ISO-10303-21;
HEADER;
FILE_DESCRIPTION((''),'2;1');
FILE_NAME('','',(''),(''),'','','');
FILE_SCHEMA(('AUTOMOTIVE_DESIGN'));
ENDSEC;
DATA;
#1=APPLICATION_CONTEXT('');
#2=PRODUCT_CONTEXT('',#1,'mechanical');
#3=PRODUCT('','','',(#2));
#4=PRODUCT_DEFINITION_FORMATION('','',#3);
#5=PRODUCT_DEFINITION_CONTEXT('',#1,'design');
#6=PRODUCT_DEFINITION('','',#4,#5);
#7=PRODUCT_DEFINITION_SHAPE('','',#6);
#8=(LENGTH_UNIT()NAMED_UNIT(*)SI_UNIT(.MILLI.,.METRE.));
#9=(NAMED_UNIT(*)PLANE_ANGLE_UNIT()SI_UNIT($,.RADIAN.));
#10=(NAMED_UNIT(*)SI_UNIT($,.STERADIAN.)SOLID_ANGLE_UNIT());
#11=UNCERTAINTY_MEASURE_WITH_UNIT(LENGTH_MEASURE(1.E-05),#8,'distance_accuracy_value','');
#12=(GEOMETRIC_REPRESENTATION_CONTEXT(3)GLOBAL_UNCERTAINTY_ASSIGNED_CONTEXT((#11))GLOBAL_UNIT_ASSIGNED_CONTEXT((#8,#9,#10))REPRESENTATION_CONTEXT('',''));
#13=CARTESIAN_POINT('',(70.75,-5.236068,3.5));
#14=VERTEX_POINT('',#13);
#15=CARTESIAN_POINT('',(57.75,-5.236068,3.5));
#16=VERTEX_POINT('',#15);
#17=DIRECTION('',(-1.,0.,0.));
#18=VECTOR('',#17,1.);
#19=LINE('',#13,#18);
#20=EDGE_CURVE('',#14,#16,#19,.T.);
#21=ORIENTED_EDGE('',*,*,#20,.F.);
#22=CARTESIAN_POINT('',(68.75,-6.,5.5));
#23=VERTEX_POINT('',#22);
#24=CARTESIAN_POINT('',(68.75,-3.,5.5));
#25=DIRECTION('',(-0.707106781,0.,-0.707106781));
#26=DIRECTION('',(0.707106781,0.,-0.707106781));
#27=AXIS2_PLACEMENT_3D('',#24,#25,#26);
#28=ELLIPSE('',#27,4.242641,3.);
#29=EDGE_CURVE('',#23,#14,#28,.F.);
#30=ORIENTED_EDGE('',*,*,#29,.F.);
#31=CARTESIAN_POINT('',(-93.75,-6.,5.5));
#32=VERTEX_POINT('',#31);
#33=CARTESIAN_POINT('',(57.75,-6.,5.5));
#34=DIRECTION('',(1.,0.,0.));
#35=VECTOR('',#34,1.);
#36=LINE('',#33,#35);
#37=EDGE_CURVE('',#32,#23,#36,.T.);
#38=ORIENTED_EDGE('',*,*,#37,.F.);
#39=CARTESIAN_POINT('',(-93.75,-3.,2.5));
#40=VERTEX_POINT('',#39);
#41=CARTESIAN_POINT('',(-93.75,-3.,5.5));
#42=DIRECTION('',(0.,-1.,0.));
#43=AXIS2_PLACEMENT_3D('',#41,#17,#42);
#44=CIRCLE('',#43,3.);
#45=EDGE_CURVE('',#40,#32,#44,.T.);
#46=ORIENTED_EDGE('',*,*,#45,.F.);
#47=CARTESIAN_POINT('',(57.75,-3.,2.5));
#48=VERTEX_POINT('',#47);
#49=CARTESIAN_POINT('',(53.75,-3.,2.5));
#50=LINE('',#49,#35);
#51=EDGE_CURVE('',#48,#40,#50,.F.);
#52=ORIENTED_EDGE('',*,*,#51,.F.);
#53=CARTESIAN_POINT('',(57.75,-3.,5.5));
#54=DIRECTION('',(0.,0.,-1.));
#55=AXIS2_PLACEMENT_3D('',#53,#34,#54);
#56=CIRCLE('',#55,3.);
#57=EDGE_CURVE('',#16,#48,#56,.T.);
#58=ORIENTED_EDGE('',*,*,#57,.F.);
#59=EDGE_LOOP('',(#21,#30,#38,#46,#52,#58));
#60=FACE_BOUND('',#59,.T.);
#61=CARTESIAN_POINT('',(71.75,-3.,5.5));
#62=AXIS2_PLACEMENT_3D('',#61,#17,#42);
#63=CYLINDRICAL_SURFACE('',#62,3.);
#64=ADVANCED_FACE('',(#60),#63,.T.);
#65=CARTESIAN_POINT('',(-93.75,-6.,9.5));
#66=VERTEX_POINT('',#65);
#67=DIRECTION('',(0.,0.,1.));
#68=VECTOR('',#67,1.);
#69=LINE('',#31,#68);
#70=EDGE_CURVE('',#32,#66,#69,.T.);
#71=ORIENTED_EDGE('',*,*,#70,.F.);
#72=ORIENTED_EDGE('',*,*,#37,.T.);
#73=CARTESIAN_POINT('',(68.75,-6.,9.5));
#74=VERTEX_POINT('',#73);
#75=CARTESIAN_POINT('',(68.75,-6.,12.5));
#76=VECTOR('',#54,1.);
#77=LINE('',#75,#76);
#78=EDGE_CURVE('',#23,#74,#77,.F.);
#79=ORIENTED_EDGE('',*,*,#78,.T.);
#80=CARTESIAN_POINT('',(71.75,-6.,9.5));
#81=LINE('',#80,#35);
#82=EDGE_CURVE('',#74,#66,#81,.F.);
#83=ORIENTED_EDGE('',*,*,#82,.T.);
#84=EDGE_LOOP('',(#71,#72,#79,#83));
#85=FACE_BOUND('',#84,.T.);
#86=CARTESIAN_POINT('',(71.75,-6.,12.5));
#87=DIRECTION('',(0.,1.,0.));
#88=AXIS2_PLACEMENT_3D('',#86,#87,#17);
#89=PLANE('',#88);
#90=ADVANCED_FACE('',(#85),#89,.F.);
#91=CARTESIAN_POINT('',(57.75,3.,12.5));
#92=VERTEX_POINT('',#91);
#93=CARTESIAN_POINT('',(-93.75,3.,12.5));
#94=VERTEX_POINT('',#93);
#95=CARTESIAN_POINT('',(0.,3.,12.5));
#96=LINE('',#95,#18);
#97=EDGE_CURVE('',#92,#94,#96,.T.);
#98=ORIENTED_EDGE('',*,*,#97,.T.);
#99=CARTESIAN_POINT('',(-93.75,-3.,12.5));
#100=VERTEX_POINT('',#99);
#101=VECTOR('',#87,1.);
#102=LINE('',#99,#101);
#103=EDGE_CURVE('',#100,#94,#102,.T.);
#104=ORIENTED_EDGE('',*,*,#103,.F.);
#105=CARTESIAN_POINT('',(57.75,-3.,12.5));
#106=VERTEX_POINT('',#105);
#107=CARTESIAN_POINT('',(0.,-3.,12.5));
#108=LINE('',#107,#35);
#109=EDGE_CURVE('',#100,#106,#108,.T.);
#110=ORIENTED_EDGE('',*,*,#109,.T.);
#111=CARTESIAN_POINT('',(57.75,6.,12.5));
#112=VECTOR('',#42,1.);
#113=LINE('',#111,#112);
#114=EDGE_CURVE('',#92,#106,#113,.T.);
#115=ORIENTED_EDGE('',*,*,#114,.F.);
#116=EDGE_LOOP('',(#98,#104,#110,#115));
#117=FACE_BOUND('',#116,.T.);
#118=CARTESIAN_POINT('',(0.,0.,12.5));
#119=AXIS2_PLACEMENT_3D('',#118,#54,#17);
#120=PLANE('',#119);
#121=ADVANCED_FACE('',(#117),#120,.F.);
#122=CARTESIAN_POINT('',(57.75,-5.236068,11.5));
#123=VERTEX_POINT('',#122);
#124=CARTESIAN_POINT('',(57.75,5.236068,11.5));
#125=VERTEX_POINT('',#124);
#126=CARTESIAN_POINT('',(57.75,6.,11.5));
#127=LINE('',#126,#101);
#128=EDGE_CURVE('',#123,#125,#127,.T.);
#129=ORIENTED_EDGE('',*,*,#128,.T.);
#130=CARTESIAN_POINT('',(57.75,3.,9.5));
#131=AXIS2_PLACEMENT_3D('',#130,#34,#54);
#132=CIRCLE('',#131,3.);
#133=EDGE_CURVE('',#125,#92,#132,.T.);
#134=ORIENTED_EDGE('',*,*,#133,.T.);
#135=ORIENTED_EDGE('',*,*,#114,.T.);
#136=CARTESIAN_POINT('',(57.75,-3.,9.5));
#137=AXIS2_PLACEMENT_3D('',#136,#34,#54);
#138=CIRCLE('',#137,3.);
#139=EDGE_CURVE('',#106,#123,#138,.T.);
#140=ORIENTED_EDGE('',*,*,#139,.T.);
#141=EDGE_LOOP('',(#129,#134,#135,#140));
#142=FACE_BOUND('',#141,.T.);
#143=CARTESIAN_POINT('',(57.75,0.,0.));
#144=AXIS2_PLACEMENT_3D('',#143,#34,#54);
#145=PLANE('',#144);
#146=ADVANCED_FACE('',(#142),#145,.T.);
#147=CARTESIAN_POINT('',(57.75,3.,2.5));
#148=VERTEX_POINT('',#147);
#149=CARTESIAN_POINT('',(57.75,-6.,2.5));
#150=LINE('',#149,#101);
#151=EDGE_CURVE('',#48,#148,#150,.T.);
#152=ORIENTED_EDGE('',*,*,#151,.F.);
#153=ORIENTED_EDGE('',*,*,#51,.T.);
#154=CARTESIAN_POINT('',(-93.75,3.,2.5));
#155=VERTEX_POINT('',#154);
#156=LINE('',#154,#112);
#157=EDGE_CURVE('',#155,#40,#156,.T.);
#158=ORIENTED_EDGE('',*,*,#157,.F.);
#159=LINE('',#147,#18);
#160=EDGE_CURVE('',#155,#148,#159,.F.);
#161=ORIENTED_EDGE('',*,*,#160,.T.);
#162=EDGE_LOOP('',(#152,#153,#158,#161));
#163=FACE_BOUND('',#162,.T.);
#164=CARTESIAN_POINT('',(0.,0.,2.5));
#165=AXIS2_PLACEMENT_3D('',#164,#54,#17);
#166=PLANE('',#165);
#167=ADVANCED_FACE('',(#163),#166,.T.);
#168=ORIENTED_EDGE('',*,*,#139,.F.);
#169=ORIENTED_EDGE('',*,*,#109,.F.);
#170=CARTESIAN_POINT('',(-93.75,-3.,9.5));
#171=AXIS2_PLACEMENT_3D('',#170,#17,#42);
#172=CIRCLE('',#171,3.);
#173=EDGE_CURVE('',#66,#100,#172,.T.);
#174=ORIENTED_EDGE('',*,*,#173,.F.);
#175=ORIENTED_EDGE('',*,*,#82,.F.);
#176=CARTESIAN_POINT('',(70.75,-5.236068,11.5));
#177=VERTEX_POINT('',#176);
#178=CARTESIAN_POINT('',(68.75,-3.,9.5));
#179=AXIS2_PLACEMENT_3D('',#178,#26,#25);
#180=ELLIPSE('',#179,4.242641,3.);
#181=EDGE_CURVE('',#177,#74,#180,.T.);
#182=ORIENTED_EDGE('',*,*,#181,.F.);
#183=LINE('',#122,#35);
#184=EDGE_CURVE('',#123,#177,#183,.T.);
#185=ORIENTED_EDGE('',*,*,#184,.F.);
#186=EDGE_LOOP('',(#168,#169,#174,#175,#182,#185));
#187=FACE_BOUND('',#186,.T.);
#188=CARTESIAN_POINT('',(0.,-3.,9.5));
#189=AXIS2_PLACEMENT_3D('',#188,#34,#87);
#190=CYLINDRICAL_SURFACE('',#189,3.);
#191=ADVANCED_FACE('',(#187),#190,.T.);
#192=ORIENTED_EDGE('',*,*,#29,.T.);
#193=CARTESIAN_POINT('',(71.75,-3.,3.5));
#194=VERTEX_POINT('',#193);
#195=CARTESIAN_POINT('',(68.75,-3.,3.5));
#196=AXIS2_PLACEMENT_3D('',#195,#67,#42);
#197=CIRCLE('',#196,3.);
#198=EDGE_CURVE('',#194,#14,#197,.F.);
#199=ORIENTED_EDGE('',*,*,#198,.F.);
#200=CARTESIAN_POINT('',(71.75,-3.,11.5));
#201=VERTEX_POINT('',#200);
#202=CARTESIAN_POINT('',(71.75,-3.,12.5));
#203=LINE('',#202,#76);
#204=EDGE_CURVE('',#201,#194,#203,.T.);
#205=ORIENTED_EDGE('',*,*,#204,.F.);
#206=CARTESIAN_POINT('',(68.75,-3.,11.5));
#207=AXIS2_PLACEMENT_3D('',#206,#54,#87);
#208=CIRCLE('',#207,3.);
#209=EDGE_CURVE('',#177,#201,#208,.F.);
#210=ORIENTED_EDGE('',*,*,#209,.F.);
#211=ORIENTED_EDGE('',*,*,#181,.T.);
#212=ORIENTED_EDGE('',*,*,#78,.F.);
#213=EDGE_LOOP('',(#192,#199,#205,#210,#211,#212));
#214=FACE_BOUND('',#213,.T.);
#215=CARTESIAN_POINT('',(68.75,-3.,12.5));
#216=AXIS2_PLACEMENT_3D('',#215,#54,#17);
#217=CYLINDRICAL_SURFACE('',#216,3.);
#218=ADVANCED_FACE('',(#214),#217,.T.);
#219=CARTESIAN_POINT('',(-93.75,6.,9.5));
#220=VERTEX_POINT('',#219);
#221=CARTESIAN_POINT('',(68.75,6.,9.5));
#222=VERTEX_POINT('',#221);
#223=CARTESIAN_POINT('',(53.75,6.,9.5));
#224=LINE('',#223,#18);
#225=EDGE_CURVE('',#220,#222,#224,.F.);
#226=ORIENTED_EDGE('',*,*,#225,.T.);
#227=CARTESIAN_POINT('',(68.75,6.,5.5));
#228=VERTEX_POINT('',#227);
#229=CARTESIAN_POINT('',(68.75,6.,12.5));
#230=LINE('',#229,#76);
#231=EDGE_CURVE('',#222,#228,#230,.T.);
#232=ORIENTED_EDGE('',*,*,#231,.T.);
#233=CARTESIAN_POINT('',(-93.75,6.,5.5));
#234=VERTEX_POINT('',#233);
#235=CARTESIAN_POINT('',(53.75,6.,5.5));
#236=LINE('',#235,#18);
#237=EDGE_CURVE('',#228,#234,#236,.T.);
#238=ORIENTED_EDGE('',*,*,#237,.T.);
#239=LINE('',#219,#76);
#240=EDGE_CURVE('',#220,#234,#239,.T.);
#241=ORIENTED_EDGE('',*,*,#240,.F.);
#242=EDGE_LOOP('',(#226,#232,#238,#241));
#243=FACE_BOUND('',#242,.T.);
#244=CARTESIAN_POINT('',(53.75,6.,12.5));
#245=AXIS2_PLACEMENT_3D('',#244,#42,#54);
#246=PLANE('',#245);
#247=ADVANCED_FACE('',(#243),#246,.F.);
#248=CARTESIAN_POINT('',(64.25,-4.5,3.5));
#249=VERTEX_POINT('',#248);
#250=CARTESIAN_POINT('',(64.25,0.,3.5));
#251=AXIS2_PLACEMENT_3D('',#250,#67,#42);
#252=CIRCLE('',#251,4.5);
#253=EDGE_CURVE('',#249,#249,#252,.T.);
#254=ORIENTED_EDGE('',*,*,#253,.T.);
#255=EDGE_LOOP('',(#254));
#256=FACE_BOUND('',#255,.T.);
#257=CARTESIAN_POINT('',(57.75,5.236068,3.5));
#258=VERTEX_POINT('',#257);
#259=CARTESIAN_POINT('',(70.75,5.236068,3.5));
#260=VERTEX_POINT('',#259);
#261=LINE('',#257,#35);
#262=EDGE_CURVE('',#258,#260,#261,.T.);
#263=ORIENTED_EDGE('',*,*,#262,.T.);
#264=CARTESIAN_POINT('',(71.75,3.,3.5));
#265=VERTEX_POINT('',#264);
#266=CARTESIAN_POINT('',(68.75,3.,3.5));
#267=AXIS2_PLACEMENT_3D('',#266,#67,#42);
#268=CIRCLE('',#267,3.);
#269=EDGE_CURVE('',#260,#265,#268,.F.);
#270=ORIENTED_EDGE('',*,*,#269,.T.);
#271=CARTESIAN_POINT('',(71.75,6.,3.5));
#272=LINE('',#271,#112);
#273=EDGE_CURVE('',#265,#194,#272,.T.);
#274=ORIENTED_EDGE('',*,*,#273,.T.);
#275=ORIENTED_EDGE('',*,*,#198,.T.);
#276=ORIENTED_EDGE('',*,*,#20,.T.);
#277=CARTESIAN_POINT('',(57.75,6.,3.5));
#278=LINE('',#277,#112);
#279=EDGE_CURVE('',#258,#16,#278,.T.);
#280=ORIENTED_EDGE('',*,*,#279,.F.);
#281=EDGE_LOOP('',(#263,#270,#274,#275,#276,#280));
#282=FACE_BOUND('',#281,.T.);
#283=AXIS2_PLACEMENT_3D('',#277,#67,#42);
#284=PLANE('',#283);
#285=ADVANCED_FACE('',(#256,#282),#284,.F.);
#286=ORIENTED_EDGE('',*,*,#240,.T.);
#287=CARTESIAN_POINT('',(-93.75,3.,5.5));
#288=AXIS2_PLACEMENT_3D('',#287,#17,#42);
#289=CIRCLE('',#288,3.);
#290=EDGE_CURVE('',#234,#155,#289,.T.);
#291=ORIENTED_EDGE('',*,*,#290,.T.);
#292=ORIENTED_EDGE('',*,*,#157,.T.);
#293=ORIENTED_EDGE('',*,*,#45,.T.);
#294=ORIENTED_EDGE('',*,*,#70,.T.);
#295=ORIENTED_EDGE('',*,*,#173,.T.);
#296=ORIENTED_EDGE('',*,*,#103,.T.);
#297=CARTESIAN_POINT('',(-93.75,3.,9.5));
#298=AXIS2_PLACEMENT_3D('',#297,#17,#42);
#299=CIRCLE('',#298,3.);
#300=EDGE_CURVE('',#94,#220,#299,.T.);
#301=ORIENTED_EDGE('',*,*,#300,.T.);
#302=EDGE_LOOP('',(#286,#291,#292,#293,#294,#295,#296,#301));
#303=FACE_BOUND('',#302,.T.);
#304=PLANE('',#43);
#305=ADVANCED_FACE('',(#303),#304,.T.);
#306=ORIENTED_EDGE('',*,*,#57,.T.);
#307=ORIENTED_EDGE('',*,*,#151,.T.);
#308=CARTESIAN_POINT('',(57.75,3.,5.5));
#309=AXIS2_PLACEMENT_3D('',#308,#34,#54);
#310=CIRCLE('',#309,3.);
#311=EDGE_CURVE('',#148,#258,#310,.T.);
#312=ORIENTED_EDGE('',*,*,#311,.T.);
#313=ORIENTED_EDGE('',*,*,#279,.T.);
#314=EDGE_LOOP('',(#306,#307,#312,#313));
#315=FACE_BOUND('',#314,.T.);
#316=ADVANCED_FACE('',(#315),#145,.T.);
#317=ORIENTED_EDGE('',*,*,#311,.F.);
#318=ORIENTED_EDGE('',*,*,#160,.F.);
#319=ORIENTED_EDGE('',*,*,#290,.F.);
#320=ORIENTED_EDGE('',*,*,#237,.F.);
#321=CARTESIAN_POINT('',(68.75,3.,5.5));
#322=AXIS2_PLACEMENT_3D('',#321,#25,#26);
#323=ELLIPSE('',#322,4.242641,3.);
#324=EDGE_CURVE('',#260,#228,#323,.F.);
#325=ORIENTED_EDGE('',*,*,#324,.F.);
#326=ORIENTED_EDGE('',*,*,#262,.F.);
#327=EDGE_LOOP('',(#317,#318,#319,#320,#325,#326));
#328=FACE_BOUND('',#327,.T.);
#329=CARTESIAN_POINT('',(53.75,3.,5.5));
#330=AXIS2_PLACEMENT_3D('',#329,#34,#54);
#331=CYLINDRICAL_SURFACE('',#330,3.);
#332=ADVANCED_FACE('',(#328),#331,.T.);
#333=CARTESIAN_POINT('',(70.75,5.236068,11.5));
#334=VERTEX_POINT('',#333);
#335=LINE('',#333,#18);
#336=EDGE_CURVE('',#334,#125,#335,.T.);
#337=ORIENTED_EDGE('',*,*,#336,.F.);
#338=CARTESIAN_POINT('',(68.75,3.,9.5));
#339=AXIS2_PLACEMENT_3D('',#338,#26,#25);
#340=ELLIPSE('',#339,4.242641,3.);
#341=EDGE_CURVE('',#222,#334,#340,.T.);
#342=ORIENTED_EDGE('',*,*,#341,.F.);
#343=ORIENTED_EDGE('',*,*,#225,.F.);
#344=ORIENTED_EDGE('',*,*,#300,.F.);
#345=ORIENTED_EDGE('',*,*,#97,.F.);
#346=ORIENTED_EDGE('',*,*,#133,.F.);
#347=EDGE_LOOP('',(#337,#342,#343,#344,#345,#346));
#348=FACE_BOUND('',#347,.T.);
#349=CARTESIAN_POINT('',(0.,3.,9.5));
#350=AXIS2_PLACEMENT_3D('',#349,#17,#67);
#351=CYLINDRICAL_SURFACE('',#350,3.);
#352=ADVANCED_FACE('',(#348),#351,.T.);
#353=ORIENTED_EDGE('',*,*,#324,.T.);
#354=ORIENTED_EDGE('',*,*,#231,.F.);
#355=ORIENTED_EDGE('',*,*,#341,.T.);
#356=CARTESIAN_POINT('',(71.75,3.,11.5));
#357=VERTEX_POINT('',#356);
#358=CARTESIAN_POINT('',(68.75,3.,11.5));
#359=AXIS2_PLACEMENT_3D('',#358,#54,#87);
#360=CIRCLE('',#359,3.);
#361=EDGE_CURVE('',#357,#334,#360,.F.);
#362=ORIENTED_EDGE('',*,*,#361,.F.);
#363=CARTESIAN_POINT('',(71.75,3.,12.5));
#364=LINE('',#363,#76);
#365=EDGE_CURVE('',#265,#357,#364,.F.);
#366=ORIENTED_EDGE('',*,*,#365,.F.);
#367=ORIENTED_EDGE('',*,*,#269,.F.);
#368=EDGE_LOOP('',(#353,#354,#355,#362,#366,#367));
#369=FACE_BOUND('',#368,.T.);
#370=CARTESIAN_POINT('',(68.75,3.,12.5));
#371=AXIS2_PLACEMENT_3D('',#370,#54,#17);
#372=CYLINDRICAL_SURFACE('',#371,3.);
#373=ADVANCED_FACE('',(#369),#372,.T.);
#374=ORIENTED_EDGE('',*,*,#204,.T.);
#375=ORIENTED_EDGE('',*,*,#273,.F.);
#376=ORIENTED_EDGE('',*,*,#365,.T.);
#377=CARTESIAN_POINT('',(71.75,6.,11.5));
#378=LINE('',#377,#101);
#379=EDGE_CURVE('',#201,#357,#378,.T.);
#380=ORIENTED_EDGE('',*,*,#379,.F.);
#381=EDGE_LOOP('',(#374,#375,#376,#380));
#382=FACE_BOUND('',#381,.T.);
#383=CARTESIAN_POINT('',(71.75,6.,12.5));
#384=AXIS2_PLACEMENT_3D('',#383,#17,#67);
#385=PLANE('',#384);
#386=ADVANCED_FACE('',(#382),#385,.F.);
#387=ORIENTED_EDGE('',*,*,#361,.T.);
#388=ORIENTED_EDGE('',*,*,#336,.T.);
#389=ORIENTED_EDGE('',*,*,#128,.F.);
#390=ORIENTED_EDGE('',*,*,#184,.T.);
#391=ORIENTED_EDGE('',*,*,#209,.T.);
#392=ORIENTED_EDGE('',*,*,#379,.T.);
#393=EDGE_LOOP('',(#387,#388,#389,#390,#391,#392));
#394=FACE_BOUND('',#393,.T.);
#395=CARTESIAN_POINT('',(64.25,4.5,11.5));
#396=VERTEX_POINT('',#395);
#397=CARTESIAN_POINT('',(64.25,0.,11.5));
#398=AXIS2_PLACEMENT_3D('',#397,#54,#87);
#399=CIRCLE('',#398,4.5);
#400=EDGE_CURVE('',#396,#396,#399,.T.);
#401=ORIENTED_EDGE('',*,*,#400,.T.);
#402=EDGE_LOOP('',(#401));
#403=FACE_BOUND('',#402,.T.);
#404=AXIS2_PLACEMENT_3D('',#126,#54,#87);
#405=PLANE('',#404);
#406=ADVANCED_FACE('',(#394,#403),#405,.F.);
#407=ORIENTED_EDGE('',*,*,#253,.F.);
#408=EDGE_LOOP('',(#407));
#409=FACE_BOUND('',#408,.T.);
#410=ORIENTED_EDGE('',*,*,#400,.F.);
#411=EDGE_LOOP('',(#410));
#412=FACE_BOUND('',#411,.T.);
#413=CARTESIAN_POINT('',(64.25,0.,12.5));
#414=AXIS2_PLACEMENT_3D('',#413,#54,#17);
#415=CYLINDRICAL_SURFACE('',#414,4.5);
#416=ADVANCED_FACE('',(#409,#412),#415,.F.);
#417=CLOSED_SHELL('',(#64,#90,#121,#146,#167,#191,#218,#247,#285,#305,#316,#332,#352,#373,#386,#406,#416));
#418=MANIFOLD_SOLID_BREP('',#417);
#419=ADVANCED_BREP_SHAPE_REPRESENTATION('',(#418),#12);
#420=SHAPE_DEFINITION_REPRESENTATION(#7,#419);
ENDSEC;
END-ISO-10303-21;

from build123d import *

# Parameters (mm, degrees)
CROQUIS1_W                 = 37.5
CROQUIS1_H                 = 30
SALIENTE_EXTRUIR1_DEPTH    = 15
CROQUIS2_R                 = 2.1
SALIENTE_EXTRUIR2_DEPTH    = 1
SALIENTE_EXTRUIR3_DEPTH    = 35
CROQUIS5_W                 = 18
CROQUIS5_H                 = 12
CROQUIS5_R                 = 4.5
SALIENTE_EXTRUIR4_DEPTH    = 5
CROQUIS6_W                 = 1
CROQUIS6_H                 = 12
CORTAR_EXTRUIR2_DEPTH      = 14
REDONDEO1_R                = 3
REDONDEO2_R                = 3
CORTAR_EXTRUIR3_DEPTH      = 78.447159406
CORTAR_EXTRUIR3_DEPTH_BACK = 78.447159406
CROQUIS7_OUTSIDE_W         = 123.972
CROQUIS7_OUTSIDE_H         = 74.472
CROQUIS7_OUTSIDE_W_2       = 24.163279834
CROQUIS7_OUTSIDE_H_2       = 36.211204922
SALIENTE_EXTRUIR5_DEPTH    = 147.5


with BuildPart() as part:
    # Croquis1 → Saliente-Extruir1 (new body)
    with BuildSketch(Plane.XY):
        Rectangle(CROQUIS1_W, CROQUIS1_H)
    extrude(amount=SALIENTE_EXTRUIR1_DEPTH)

    # Croquis2 → Saliente-Extruir2 (add)
    # profile 1 of 3: a face of its own
    with BuildSketch(Plane.XY):
        with BuildLine():
            Line((-18.75, 3.7), (-26.75, 3.7))
            ThreePointArc((-26.75, 3.7), (-27.457106781, 3.407106781), (-27.75, 2.7))
            Line((-27.75, 2.7), (-27.75, -2.7))
            ThreePointArc((-27.75, -2.7), (-27.457106781, -3.407106781), (-26.75, -3.7))
            Line((-26.75, -3.7), (-18.75, -3.7))
            Line((-18.75, -3.7), (-18.75, 3.7))
        make_face()
        with Locations((-23.25, 0)):
            Circle(CROQUIS2_R, mode=Mode.SUBTRACT)
    # profile 2 of 3: a face of its own
    with BuildSketch(Plane.XY):
        with BuildLine():
            Line((-10, 15), (10, 15))
            Line((10, 15), (10, 24))
            ThreePointArc((10, 24), (9.707106781, 24.707106781), (9, 25))
            Line((9, 25), (-9, 25))
            ThreePointArc((-9, 25), (-9.707106781, 24.707106781), (-10, 24))
            Line((-10, 24), (-10, 15))
        make_face()
        with Locations((-5.5, 20)):
            Circle(CROQUIS2_R, mode=Mode.SUBTRACT)
        with Locations((5.5, 20)):
            Circle(CROQUIS2_R, mode=Mode.SUBTRACT)
    # profile 3 of 3: a face of its own
    with BuildSketch(Plane.XY):
        with BuildLine():
            Line((-9, -25), (9, -25))
            ThreePointArc((9, -25), (9.707106781, -24.707106781), (10, -24))
            Line((10, -24), (10, -15))
            Line((10, -15), (-10, -15))
            Line((-10, -15), (-10, -24))
            ThreePointArc((-10, -24), (-9.707106781, -24.707106781), (-9, -25))
        make_face()
        with Locations(Location((5.5, -20, 0), (0, 0, 180))):
            Circle(CROQUIS2_R, mode=Mode.SUBTRACT)
        with Locations(Location((-5.5, -20, 0), (0, 0, 180))):
            Circle(CROQUIS2_R, mode=Mode.SUBTRACT)
    extrude(amount=SALIENTE_EXTRUIR2_DEPTH)

    # Croquis3 → Saliente-Extruir3 (add)
    with BuildSketch(Plane(origin=(18.75, 0, 0), x_dir=(0, 0, -1), z_dir=(1, 0, 0))):
        with BuildLine():
            Line((-10.5, -12.5), (-4.5, -12.5))
            ThreePointArc((-4.5, -12.5), (-2.378679656, -11.621320344), (-1.5, -9.5))
            Line((-1.5, -9.5), (-1.5, 9.5))
            ThreePointArc((-1.5, 9.5), (-2.378679656, 11.621320344), (-4.5, 12.5))
            Line((-4.5, 12.5), (-10.5, 12.5))
            ThreePointArc((-10.5, 12.5), (-12.621320344, 11.621320344), (-13.5, 9.5))
            Line((-13.5, 9.5), (-13.5, -9.5))
            ThreePointArc((-13.5, -9.5), (-12.621320344, -11.621320344), (-10.5, -12.5))
        make_face()
    extrude(amount=SALIENTE_EXTRUIR3_DEPTH)

    # Croquis5 → Saliente-Extruir4 (add, symmetric)
    with BuildSketch(Plane.XY.offset(7.5)):
        with Locations((62.75, 0)):
            Rectangle(CROQUIS5_W, CROQUIS5_H)
        with Locations((64.25, 0)):
            Circle(CROQUIS5_R, mode=Mode.SUBTRACT)
    extrude(amount=SALIENTE_EXTRUIR4_DEPTH, both=True)

    # Croquis6 → Cortar-Extruir2 (cut)
    with BuildSketch(Plane(origin=(71.75, 0, 0), x_dir=(0, 0, -1), z_dir=(1, 0, 0))):
        with Locations((-12, 0)):
            Rectangle(CROQUIS6_W, CROQUIS6_H)
        with Locations((-3, 0)):
            Rectangle(CROQUIS6_W, CROQUIS6_H)
    extrude(amount=-CORTAR_EXTRUIR2_DEPTH, mode=Mode.SUBTRACT)

    # Redondeo1
    redondeo1_edges = [part.edges().sort_by_distance(p)[0] for p in [
        (71.75, 6, 7.5),
        (71.75, -6, 7.5),
    ]]
    fillet(redondeo1_edges, radius=REDONDEO1_R)

    # Redondeo2
    # the kernel refuses this fillet: 3 mm, written as the material it takes off along each edge
    with BuildSketch(Plane(origin=(75.75, -6, 12.5), x_dir=(0, 1, 0), z_dir=(-1, 0, 0)), Plane(origin=(53.75, 6, 2.5), x_dir=(0, 0, 1), z_dir=(1, 0, 0))) as redondeo2_piece_1:
        with BuildLine():
            CenterArc((REDONDEO2_R, REDONDEO2_R), REDONDEO2_R, 180, 90)
            Line((0, REDONDEO2_R), (-REDONDEO2_R * 0.02, REDONDEO2_R))
            Line((-REDONDEO2_R * 0.02, REDONDEO2_R), (-REDONDEO2_R * 0.02, -REDONDEO2_R * 0.02))
            Line((-REDONDEO2_R * 0.02, -REDONDEO2_R * 0.02), (REDONDEO2_R, -REDONDEO2_R * 0.02))
            Line((REDONDEO2_R, -REDONDEO2_R * 0.02), (REDONDEO2_R, 0))
        make_face()
    extrude(amount=22, mode=Mode.SUBTRACT)
    with BuildSketch(Plane(origin=(75.75, -6, 2.5), x_dir=(0, 1, 0), z_dir=(-1, 0, 0)), Plane(origin=(53.75, 6, 12.5), x_dir=(0, 0, -1), z_dir=(1, 0, 0))) as redondeo2_piece_2:
        with BuildLine():
            CenterArc((REDONDEO2_R, -REDONDEO2_R), REDONDEO2_R, 90, 90)
            Line((0, -REDONDEO2_R), (-REDONDEO2_R * 0.02, -REDONDEO2_R))
            Line((-REDONDEO2_R * 0.02, -REDONDEO2_R), (-REDONDEO2_R * 0.02, REDONDEO2_R * 0.02))
            Line((-REDONDEO2_R * 0.02, REDONDEO2_R * 0.02), (REDONDEO2_R, REDONDEO2_R * 0.02))
            Line((REDONDEO2_R, REDONDEO2_R * 0.02), (REDONDEO2_R, 0))
        make_face()
    extrude(amount=22, mode=Mode.SUBTRACT)

    # Croquis7 outside → Cortar-Extruir3 (cut, two sides: drawn at the far end of the back side and taken through both)
    with BuildSketch(Plane.XY.offset(15).offset(-CORTAR_EXTRUIR3_DEPTH_BACK)):
        with Locations((22, 0)):
            Rectangle(CROQUIS7_OUTSIDE_W, CROQUIS7_OUTSIDE_H)
        with Locations((65.831639917, -3.105602461)):
            Rectangle(CROQUIS7_OUTSIDE_W_2, CROQUIS7_OUTSIDE_H_2, mode=Mode.SUBTRACT)
    extrude(amount=CORTAR_EXTRUIR3_DEPTH + CORTAR_EXTRUIR3_DEPTH_BACK, mode=Mode.SUBTRACT)

    # Croquis10 → Saliente-Extruir5 (add)
    with BuildSketch(Plane.ZY.offset(-53.75)):
        with BuildLine():
            Line((5.5, -6), (9.5, -6))
            ThreePointArc((9.5, -6), (11.621320344, -5.121320344), (12.5, -3))
            Line((12.5, -3), (12.5, 3))
            ThreePointArc((12.5, 3), (11.621320344, 5.121320344), (9.5, 6))
            Line((9.5, 6), (5.5, 6))
            ThreePointArc((5.5, 6), (3.378679656, 5.121320344), (2.5, 3))
            Line((2.5, 3), (2.5, -3))
            ThreePointArc((2.5, -3), (3.378679656, -5.121320344), (5.5, -6))
        make_face()
    extrude(amount=SALIENTE_EXTRUIR5_DEPTH)


solid = part.part
